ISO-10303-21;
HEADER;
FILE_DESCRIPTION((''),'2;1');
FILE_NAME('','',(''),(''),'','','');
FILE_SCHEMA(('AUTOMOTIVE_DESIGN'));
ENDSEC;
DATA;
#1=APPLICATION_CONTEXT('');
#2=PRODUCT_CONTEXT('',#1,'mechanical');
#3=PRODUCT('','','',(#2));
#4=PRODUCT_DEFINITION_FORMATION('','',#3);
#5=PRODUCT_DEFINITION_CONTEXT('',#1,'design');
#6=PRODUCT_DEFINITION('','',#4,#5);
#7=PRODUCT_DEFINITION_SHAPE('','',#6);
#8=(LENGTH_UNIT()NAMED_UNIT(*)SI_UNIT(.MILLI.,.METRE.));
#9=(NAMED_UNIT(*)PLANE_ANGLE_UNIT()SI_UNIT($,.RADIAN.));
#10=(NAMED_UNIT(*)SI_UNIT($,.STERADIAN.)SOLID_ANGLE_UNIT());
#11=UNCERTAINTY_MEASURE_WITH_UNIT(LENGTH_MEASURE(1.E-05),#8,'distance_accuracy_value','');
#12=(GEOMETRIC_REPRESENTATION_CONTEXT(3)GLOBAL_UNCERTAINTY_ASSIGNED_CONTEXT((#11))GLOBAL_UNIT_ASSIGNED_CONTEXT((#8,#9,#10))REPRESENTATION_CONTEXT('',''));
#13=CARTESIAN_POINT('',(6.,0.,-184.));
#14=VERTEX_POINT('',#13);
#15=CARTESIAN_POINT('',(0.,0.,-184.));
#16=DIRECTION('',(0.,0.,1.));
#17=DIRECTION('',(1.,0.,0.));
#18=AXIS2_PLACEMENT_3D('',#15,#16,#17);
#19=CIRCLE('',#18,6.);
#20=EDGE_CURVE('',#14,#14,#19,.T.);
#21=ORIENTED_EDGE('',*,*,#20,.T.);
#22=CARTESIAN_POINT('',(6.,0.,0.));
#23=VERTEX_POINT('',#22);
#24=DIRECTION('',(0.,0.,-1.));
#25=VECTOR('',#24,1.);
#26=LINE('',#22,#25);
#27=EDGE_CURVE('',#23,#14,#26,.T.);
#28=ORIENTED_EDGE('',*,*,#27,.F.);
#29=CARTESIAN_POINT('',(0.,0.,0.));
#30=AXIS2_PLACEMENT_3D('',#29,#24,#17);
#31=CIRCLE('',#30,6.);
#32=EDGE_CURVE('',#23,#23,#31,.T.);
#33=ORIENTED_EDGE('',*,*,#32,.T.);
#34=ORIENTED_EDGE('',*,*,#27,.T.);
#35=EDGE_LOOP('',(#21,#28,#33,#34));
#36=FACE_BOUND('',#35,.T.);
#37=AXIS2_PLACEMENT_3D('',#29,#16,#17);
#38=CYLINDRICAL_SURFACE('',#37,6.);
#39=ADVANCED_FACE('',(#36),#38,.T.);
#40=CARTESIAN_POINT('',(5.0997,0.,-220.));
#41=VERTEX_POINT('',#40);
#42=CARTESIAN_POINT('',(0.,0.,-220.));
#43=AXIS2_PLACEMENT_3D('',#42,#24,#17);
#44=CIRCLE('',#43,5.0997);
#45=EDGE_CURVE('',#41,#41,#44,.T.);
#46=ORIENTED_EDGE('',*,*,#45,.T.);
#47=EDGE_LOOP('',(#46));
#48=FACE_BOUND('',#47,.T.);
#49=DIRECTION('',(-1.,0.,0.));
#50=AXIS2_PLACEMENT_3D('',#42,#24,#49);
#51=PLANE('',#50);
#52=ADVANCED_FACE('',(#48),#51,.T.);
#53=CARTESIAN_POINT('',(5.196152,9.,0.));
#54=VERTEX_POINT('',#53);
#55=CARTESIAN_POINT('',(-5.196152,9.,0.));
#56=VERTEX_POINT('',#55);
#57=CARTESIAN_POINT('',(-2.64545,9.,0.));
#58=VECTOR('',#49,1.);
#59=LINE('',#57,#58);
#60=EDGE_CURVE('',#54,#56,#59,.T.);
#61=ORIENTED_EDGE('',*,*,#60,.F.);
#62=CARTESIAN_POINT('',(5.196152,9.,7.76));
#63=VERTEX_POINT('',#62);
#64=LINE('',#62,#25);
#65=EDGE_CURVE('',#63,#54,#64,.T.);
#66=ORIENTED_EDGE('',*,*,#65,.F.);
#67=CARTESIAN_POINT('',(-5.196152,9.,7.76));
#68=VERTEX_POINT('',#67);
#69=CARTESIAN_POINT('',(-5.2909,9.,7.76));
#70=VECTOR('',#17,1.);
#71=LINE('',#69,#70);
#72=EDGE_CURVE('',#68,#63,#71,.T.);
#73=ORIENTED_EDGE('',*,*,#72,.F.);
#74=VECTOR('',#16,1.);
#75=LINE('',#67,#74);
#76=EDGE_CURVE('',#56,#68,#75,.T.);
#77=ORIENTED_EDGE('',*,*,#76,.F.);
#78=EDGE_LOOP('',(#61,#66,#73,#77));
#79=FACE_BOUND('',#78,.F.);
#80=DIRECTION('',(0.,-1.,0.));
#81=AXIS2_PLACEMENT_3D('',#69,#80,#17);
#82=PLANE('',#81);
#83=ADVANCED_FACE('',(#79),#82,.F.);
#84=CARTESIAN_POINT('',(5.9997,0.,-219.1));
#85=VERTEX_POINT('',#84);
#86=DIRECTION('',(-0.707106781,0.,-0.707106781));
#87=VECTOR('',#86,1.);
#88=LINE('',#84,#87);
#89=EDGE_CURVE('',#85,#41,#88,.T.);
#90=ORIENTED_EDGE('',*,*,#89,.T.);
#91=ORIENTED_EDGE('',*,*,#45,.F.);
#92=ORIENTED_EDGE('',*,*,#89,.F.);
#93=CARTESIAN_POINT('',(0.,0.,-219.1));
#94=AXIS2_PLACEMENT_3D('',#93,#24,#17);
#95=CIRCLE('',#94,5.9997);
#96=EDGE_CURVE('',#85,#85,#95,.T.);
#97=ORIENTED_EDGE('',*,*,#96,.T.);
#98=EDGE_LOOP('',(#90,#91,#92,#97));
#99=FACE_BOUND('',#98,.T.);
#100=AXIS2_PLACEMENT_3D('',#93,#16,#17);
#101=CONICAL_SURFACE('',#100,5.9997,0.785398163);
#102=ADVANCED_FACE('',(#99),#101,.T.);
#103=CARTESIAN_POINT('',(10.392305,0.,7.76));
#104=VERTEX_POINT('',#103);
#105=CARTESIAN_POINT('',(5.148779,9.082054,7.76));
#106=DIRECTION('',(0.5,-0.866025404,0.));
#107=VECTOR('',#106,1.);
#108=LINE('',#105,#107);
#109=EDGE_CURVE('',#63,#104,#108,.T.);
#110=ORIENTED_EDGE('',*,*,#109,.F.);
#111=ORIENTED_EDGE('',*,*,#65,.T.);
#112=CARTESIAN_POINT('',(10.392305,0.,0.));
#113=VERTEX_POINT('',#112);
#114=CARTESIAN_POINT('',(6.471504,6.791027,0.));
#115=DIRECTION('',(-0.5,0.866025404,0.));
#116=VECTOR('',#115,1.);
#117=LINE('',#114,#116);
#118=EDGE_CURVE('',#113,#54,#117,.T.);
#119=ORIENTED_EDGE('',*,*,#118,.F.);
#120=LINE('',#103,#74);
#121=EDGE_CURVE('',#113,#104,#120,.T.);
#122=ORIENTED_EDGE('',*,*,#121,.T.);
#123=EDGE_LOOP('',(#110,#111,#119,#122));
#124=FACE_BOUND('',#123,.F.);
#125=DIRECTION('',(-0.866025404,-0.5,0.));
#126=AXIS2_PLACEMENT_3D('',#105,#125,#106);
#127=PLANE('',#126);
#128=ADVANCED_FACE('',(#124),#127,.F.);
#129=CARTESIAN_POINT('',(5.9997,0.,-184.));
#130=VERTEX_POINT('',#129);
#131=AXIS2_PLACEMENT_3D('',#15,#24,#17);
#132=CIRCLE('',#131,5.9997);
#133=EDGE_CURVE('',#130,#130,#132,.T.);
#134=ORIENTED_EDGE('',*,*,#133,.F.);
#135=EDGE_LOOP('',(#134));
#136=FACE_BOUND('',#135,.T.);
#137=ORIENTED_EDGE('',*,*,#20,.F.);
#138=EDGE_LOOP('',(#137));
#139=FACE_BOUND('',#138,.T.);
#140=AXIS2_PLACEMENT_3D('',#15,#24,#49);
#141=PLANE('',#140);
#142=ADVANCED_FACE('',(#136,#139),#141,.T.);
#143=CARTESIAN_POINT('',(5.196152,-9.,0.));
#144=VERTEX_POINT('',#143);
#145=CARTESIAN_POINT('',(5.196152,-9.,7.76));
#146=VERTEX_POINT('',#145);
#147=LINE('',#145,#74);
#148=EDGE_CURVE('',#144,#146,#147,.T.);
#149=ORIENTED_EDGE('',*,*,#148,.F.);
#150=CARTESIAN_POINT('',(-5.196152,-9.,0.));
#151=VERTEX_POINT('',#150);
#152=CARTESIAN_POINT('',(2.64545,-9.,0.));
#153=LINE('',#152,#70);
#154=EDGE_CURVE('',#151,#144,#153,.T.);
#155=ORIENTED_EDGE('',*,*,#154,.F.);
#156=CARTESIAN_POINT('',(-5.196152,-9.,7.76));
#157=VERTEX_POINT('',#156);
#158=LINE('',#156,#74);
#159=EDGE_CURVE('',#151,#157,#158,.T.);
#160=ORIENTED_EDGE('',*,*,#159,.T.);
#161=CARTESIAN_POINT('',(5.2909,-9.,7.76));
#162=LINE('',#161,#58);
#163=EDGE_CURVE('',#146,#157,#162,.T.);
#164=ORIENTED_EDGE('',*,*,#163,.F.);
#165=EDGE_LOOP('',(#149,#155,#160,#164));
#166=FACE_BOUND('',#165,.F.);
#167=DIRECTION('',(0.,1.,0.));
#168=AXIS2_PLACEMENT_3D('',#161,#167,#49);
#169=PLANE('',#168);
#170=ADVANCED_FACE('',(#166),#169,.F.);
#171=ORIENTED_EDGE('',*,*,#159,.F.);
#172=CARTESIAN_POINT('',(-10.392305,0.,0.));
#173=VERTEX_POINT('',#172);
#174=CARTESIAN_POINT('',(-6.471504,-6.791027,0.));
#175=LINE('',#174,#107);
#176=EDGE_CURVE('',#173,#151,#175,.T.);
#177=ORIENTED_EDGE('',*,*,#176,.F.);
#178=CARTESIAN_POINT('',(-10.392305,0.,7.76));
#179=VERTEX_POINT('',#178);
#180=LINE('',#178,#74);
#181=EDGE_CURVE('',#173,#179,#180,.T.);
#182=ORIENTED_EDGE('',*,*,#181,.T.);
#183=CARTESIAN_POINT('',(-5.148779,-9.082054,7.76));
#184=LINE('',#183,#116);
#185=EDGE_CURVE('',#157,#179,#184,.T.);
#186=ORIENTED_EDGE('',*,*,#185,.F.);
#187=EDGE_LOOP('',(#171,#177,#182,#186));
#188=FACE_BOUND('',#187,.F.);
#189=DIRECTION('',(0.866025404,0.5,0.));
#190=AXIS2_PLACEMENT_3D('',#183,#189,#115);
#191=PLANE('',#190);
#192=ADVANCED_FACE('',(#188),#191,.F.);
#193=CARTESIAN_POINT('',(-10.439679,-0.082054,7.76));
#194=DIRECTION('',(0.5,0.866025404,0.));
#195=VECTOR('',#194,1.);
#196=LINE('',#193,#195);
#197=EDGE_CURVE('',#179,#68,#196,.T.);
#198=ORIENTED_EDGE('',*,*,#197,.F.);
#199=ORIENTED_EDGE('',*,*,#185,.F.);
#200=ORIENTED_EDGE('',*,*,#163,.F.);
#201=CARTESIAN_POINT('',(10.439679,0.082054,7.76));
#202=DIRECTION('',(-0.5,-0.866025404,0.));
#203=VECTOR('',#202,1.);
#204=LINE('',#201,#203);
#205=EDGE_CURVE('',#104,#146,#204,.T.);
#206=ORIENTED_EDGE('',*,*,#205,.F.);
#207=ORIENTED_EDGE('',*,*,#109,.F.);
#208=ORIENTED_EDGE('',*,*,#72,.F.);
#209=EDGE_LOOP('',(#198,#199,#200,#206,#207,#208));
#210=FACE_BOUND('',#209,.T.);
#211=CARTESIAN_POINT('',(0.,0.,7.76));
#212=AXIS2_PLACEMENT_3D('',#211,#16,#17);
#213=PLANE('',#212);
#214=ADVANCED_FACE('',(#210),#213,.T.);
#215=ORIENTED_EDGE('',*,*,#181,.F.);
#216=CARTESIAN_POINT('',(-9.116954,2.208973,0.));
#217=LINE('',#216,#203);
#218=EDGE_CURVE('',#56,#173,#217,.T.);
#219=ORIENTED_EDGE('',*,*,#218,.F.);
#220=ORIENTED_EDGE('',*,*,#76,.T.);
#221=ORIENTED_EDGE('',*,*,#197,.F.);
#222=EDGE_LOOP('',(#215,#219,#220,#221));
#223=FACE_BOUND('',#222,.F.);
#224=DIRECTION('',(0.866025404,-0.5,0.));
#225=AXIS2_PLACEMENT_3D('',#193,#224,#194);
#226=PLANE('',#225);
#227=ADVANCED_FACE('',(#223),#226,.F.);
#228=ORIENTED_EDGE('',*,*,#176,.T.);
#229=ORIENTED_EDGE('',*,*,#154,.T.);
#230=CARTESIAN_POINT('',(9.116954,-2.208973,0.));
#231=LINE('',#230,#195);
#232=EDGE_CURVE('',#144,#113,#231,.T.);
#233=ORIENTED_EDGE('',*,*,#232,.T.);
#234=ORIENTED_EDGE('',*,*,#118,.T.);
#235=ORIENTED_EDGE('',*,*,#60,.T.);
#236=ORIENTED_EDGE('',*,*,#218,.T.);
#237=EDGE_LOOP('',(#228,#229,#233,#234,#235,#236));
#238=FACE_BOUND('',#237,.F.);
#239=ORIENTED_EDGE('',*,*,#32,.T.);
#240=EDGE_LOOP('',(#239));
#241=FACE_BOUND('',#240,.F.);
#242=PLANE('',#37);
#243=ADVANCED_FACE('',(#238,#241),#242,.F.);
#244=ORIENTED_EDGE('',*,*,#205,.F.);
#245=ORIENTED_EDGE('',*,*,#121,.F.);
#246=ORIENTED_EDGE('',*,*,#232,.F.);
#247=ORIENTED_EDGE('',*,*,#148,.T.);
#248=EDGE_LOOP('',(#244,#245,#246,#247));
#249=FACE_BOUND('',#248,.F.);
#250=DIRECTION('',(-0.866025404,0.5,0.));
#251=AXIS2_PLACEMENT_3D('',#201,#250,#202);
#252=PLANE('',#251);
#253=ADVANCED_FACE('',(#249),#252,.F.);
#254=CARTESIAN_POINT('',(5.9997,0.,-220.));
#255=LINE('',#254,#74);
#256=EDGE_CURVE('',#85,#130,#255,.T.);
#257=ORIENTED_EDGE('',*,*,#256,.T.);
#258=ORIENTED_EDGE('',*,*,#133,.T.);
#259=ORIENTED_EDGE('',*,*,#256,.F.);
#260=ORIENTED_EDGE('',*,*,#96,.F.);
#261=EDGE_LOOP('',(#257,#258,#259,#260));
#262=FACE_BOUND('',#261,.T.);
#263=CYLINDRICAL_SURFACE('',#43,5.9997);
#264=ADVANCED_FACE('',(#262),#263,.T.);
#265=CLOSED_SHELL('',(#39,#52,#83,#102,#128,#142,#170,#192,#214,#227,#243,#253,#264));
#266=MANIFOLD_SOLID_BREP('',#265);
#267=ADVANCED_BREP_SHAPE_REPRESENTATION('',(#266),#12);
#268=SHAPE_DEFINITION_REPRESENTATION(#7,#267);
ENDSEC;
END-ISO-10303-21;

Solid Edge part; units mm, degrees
sketch "Sketch1" plane through (0, 0, 0) normal (0, 0, 1) x (1, 0, 0)
  circle A0 centre (0, 0) radius 10.44
  dimension "D1" = 20.88
extrude "Protrusion1" add sketch "Sketch1" along normal blind 7.76
sketch "Sketch2" plane through (0, 0, 0) normal (0, 0, -1) x (1, 0, 0)
  circle A0 centre (0, 0) radius 6
extrude "Protrusion2" add sketch "Sketch2" along normal blind 220
sketch "Sketch3" plane through (0, 0, -220) normal (0, 0, -1) x (1, 0, 0)
  circle A0 centre (0, 0) radius 5.9997
extrude "Cutout1" cut sketch "Sketch3" against normal blind 36 flip side to cut
chamfer "Chamfer_1" distance 0.9 angle 45 1 edges at (-5.9997, 0, -220)
sketch "Sketch4" plane through (0, 0, 7.76) normal (0, 0, 1) x (1, 0, 0)
  line L0 (-5.2909, 9) -> (5.2909, 9)
  dimension "D1" = 18
extrude "Cutout2" cut sketch "Sketch4" against normal up to next material side at (0, 9.05, 7.76)
pattern_circular "Pattern1" count 6 over 360 about axis through (0, 0, 7.76) along (0, 0, 1) of "Cutout2"
properties part number "200457"
